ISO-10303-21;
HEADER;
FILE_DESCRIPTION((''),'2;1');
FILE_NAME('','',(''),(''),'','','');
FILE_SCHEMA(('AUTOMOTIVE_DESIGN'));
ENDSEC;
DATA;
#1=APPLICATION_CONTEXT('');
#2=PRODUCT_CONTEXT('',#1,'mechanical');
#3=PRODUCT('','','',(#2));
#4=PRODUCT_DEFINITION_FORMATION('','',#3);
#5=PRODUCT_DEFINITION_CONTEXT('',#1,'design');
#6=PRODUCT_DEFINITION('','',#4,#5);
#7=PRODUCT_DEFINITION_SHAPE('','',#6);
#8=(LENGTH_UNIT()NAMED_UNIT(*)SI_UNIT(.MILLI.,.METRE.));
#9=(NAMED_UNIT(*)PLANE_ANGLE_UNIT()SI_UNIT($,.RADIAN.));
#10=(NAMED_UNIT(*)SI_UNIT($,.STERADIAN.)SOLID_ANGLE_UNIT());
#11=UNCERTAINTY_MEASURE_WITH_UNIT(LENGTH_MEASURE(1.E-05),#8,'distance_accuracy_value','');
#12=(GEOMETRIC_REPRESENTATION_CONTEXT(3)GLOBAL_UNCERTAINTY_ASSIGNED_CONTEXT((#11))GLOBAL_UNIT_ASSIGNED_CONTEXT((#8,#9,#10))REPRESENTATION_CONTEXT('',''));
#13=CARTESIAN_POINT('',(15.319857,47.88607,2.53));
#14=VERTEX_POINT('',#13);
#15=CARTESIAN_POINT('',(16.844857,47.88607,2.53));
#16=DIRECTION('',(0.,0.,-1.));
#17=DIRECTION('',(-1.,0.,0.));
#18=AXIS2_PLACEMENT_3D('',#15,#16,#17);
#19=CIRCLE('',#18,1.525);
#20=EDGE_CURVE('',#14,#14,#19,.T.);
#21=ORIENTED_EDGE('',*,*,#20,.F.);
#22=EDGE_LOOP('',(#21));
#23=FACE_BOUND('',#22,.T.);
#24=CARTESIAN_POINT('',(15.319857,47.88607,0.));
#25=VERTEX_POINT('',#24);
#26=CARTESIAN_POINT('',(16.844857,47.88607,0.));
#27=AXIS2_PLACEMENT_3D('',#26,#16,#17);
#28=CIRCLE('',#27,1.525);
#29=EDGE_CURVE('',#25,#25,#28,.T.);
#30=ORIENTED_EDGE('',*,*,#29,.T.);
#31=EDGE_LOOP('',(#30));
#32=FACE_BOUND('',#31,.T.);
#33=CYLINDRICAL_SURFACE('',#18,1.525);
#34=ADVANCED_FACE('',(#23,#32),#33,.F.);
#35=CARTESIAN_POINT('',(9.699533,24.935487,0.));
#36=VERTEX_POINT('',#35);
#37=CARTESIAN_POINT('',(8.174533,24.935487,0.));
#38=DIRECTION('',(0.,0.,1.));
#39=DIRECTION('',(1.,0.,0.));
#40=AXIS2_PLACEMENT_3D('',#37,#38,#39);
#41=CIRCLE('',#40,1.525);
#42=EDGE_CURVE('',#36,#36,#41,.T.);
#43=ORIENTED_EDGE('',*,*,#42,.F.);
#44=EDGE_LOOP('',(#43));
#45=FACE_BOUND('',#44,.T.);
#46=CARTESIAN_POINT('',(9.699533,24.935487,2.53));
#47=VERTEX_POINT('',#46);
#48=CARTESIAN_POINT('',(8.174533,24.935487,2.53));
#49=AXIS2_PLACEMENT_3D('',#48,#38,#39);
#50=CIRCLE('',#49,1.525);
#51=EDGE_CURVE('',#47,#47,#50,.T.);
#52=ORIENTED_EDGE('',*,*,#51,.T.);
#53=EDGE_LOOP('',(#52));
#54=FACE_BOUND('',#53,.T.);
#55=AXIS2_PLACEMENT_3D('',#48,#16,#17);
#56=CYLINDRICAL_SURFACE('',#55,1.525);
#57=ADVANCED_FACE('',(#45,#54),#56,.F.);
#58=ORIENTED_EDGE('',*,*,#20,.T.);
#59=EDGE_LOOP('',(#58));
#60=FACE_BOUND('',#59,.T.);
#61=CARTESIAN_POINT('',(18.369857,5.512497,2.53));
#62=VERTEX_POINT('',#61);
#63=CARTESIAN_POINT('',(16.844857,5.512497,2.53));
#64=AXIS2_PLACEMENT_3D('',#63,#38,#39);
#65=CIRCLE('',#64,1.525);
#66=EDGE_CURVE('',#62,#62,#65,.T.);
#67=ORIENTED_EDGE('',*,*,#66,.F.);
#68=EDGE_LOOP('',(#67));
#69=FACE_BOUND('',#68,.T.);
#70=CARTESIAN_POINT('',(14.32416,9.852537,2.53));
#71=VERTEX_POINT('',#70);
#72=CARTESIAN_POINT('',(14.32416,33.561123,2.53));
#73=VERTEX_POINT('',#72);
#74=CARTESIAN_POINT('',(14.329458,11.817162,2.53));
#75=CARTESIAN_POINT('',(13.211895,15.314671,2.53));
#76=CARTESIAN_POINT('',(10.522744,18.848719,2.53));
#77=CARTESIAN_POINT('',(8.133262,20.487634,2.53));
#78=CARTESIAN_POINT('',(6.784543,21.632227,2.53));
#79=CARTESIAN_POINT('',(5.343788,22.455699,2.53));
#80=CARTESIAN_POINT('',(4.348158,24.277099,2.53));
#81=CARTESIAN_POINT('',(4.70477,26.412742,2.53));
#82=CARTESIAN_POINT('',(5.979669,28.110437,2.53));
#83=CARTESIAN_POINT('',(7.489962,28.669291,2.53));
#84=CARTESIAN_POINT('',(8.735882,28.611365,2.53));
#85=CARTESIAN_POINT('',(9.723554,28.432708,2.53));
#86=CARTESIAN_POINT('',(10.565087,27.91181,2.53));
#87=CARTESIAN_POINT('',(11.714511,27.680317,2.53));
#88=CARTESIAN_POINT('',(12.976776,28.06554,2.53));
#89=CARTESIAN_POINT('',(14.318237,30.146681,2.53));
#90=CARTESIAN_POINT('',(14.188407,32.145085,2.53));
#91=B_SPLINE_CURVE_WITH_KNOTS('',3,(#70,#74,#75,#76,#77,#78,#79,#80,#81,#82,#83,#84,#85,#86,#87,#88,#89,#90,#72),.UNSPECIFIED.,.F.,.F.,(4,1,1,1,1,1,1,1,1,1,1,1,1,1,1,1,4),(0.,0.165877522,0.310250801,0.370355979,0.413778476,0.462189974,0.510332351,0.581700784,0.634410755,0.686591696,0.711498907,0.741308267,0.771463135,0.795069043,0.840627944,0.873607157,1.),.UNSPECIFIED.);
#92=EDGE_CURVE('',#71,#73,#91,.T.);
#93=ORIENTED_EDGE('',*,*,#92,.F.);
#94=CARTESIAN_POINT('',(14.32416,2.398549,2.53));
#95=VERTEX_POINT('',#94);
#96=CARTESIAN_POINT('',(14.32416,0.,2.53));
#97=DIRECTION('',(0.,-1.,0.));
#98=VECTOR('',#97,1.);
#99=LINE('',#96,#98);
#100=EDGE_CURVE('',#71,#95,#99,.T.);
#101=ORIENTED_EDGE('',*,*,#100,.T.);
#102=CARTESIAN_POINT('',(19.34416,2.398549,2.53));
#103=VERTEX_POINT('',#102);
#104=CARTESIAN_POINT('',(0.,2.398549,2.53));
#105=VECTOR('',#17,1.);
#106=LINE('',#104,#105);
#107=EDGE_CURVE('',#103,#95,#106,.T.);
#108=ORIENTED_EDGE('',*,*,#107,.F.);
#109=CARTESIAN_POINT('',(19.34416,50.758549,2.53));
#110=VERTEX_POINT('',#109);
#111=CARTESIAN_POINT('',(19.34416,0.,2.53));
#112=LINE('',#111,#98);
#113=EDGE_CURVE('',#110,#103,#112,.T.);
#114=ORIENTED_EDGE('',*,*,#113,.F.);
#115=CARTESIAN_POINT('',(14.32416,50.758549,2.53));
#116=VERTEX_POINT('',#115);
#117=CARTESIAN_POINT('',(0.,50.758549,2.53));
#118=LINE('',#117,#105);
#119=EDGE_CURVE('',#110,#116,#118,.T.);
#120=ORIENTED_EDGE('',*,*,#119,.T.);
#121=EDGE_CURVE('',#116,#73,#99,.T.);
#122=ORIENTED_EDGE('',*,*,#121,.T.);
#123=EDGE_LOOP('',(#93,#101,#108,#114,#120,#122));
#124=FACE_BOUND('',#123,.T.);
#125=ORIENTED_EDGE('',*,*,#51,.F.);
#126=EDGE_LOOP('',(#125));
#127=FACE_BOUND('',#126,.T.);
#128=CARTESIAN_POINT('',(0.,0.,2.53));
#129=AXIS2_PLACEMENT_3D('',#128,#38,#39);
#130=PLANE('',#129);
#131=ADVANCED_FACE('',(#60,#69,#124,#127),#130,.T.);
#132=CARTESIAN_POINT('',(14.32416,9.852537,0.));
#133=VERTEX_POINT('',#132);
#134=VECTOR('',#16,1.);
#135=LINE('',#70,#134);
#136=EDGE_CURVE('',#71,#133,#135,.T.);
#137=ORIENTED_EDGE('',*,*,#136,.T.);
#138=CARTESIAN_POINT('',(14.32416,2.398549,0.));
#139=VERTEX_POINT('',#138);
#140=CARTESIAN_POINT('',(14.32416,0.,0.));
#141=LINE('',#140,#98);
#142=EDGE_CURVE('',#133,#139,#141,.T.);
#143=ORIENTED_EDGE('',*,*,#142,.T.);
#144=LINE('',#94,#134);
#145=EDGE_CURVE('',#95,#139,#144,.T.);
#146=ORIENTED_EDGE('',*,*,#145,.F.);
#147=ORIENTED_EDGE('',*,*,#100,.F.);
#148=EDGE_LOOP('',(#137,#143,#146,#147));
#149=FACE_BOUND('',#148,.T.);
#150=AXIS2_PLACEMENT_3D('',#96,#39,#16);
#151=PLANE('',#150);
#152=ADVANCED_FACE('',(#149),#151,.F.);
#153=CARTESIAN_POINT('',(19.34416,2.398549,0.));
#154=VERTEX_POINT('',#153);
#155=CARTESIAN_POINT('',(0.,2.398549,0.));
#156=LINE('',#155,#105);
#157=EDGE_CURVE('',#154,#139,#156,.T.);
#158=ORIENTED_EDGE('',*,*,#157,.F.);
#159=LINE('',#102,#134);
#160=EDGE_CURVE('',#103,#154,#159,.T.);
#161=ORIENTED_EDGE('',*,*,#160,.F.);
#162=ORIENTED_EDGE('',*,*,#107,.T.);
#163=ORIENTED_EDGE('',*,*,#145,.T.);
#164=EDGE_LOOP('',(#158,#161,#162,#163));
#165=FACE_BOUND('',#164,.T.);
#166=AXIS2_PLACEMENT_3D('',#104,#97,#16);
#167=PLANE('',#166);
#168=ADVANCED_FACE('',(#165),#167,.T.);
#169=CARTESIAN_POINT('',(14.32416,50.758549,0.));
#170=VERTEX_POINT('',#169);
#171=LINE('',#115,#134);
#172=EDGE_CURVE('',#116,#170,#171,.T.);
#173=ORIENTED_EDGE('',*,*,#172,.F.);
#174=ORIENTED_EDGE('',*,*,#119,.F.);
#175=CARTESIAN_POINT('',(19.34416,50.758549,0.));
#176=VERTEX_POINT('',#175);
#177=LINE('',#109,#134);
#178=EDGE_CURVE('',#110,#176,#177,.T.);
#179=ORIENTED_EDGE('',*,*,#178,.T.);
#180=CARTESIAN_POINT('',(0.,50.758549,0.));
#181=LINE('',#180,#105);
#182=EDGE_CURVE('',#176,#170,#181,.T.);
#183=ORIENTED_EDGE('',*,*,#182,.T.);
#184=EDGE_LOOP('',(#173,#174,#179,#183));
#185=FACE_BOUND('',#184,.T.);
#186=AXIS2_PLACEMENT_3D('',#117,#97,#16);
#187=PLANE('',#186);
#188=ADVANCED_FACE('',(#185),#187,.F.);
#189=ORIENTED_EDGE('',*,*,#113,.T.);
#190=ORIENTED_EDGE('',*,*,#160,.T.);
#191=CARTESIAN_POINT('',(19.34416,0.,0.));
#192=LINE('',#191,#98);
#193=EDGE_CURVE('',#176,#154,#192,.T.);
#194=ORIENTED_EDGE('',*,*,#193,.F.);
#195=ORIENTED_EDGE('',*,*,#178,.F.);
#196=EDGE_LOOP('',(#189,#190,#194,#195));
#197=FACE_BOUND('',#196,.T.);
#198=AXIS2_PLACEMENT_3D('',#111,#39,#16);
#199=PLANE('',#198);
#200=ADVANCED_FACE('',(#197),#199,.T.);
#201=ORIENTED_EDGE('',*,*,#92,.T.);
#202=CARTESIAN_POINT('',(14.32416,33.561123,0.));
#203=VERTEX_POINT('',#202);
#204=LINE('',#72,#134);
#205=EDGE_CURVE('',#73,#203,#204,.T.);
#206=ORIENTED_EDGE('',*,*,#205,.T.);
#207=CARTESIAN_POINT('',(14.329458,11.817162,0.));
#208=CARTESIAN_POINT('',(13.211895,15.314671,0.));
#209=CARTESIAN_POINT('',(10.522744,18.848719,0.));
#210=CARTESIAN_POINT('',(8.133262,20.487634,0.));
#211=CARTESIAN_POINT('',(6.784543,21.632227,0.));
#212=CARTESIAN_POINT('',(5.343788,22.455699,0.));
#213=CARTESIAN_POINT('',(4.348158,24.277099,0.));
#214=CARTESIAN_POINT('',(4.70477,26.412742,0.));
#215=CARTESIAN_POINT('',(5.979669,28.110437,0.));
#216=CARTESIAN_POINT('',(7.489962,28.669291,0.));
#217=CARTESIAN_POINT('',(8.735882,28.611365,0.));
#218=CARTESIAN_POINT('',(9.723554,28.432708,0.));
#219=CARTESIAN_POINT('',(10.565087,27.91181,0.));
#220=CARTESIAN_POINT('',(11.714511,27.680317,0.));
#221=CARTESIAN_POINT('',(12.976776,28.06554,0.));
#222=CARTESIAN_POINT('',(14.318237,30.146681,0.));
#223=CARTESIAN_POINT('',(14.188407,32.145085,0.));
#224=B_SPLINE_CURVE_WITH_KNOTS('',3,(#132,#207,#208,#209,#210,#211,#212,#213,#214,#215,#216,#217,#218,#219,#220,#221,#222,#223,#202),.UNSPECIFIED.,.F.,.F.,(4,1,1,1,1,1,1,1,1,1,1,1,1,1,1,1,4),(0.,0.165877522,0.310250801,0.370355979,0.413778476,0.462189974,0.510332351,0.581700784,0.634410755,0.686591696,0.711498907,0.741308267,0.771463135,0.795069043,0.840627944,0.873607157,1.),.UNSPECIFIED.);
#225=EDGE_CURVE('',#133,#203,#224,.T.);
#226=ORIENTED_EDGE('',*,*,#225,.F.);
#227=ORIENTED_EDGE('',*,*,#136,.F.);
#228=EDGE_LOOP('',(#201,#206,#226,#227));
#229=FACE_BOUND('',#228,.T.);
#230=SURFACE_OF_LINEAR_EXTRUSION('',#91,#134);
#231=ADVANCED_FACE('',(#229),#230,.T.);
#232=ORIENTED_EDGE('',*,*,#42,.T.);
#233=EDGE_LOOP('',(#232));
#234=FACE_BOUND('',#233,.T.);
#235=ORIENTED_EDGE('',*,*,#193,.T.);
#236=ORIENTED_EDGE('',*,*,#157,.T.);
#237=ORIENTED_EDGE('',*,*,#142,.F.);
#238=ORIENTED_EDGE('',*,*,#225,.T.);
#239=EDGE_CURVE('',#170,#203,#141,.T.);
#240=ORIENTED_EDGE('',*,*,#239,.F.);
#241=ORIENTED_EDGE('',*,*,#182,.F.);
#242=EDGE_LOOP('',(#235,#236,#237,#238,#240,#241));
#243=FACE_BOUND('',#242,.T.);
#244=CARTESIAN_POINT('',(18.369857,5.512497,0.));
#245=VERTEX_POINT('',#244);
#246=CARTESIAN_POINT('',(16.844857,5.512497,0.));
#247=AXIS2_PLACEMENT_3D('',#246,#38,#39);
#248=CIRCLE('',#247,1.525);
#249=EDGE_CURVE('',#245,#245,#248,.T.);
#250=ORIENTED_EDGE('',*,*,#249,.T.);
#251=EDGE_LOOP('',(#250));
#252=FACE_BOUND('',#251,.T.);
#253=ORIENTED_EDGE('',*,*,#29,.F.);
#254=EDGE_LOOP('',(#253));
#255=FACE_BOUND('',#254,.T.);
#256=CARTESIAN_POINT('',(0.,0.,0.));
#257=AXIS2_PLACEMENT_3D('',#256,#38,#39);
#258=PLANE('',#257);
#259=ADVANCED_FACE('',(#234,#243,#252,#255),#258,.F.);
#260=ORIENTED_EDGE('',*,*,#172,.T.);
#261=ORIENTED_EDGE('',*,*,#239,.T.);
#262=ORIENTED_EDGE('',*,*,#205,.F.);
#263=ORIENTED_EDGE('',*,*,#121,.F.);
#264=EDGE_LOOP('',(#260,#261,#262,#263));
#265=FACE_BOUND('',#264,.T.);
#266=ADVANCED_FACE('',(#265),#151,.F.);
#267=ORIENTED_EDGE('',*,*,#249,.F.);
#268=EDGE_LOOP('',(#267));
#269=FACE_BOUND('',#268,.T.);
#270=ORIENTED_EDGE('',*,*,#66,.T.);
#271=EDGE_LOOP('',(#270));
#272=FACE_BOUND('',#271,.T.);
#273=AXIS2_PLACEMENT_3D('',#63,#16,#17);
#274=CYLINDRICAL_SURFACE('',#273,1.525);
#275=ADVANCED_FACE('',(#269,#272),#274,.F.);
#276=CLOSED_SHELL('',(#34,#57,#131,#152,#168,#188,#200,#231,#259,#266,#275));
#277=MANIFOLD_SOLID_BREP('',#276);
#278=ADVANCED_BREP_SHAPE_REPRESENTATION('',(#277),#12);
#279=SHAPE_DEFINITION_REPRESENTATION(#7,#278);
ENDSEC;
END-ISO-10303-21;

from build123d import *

# Parameters (mm, degrees)
SCHIZZO1_R                   = 1.525
ESTRUSIONE_ESTRUSIONE1_DEPTH = 2.53
FORO1_OUTLINE_R              = 1.525
FORO1_DEPTH                  = 2.53


# Read off the part's stored shape, not the designer's step: Foro1
with BuildPart() as part:
    # Schizzo1 → Estrusione-Estrusione1 (new body)
    with BuildSketch(Plane.XY):
        with BuildLine():
            Line((19.344160128, 2.398549361), (19.344160128, 50.758549361))
            Line((19.344160128, 50.758549361), (14.324160128, 50.758549361))
            Line((14.324160128, 50.758549361), (14.324160128, 33.561123443))
            add(Edge.make_bspline(
                [(14.324160128, 9.852536517), (14.329457987, 11.817161621), (13.211895499, 15.314671374), (10.522743691, 18.848719159), (8.133261932, 20.487633555), (6.784543218, 21.63222677), (5.343788341, 22.455699212), (4.348158318, 24.27709897), (4.704770463, 26.412742482), (5.979669362, 28.110436622), (7.489962297, 28.669291236), (8.735881946, 28.611365395), (9.72355423, 28.43270848), (10.565087326, 27.911809633), (11.714510715, 27.680317465), (12.976776108, 28.065540238), (14.318236653, 30.146680578), (14.188406963, 32.145084812), (14.324160128, 33.561123443)],
                knots=[0, 0, 0, 0, 0.165877522, 0.310250801, 0.370355979, 0.413778476, 0.462189974, 0.510332351, 0.581700784, 0.634410755, 0.686591696, 0.711498907, 0.741308267, 0.771463135, 0.795069043, 0.840627944, 0.873607157, 1, 1, 1, 1], degree=3))
            Line((14.324160128, 9.852536517), (14.324160128, 2.398549361))
            Line((14.324160128, 2.398549361), (19.344160128, 2.398549361))
        make_face()
        with Locations((16.844857247, 5.512496703)):
            Circle(SCHIZZO1_R, mode=Mode.SUBTRACT)
        with Locations((8.174532934, 24.935486701)):
            Circle(SCHIZZO1_R, mode=Mode.SUBTRACT)
    extrude(amount=ESTRUSIONE_ESTRUSIONE1_DEPTH)

    # Foro1 outline → Foro1 (cut)
    with BuildSketch(Plane.XY):
        with Locations((16.844857247, 47.886069837)):
            Circle(FORO1_OUTLINE_R)
    extrude(amount=FORO1_DEPTH, mode=Mode.SUBTRACT)


solid = part.part
